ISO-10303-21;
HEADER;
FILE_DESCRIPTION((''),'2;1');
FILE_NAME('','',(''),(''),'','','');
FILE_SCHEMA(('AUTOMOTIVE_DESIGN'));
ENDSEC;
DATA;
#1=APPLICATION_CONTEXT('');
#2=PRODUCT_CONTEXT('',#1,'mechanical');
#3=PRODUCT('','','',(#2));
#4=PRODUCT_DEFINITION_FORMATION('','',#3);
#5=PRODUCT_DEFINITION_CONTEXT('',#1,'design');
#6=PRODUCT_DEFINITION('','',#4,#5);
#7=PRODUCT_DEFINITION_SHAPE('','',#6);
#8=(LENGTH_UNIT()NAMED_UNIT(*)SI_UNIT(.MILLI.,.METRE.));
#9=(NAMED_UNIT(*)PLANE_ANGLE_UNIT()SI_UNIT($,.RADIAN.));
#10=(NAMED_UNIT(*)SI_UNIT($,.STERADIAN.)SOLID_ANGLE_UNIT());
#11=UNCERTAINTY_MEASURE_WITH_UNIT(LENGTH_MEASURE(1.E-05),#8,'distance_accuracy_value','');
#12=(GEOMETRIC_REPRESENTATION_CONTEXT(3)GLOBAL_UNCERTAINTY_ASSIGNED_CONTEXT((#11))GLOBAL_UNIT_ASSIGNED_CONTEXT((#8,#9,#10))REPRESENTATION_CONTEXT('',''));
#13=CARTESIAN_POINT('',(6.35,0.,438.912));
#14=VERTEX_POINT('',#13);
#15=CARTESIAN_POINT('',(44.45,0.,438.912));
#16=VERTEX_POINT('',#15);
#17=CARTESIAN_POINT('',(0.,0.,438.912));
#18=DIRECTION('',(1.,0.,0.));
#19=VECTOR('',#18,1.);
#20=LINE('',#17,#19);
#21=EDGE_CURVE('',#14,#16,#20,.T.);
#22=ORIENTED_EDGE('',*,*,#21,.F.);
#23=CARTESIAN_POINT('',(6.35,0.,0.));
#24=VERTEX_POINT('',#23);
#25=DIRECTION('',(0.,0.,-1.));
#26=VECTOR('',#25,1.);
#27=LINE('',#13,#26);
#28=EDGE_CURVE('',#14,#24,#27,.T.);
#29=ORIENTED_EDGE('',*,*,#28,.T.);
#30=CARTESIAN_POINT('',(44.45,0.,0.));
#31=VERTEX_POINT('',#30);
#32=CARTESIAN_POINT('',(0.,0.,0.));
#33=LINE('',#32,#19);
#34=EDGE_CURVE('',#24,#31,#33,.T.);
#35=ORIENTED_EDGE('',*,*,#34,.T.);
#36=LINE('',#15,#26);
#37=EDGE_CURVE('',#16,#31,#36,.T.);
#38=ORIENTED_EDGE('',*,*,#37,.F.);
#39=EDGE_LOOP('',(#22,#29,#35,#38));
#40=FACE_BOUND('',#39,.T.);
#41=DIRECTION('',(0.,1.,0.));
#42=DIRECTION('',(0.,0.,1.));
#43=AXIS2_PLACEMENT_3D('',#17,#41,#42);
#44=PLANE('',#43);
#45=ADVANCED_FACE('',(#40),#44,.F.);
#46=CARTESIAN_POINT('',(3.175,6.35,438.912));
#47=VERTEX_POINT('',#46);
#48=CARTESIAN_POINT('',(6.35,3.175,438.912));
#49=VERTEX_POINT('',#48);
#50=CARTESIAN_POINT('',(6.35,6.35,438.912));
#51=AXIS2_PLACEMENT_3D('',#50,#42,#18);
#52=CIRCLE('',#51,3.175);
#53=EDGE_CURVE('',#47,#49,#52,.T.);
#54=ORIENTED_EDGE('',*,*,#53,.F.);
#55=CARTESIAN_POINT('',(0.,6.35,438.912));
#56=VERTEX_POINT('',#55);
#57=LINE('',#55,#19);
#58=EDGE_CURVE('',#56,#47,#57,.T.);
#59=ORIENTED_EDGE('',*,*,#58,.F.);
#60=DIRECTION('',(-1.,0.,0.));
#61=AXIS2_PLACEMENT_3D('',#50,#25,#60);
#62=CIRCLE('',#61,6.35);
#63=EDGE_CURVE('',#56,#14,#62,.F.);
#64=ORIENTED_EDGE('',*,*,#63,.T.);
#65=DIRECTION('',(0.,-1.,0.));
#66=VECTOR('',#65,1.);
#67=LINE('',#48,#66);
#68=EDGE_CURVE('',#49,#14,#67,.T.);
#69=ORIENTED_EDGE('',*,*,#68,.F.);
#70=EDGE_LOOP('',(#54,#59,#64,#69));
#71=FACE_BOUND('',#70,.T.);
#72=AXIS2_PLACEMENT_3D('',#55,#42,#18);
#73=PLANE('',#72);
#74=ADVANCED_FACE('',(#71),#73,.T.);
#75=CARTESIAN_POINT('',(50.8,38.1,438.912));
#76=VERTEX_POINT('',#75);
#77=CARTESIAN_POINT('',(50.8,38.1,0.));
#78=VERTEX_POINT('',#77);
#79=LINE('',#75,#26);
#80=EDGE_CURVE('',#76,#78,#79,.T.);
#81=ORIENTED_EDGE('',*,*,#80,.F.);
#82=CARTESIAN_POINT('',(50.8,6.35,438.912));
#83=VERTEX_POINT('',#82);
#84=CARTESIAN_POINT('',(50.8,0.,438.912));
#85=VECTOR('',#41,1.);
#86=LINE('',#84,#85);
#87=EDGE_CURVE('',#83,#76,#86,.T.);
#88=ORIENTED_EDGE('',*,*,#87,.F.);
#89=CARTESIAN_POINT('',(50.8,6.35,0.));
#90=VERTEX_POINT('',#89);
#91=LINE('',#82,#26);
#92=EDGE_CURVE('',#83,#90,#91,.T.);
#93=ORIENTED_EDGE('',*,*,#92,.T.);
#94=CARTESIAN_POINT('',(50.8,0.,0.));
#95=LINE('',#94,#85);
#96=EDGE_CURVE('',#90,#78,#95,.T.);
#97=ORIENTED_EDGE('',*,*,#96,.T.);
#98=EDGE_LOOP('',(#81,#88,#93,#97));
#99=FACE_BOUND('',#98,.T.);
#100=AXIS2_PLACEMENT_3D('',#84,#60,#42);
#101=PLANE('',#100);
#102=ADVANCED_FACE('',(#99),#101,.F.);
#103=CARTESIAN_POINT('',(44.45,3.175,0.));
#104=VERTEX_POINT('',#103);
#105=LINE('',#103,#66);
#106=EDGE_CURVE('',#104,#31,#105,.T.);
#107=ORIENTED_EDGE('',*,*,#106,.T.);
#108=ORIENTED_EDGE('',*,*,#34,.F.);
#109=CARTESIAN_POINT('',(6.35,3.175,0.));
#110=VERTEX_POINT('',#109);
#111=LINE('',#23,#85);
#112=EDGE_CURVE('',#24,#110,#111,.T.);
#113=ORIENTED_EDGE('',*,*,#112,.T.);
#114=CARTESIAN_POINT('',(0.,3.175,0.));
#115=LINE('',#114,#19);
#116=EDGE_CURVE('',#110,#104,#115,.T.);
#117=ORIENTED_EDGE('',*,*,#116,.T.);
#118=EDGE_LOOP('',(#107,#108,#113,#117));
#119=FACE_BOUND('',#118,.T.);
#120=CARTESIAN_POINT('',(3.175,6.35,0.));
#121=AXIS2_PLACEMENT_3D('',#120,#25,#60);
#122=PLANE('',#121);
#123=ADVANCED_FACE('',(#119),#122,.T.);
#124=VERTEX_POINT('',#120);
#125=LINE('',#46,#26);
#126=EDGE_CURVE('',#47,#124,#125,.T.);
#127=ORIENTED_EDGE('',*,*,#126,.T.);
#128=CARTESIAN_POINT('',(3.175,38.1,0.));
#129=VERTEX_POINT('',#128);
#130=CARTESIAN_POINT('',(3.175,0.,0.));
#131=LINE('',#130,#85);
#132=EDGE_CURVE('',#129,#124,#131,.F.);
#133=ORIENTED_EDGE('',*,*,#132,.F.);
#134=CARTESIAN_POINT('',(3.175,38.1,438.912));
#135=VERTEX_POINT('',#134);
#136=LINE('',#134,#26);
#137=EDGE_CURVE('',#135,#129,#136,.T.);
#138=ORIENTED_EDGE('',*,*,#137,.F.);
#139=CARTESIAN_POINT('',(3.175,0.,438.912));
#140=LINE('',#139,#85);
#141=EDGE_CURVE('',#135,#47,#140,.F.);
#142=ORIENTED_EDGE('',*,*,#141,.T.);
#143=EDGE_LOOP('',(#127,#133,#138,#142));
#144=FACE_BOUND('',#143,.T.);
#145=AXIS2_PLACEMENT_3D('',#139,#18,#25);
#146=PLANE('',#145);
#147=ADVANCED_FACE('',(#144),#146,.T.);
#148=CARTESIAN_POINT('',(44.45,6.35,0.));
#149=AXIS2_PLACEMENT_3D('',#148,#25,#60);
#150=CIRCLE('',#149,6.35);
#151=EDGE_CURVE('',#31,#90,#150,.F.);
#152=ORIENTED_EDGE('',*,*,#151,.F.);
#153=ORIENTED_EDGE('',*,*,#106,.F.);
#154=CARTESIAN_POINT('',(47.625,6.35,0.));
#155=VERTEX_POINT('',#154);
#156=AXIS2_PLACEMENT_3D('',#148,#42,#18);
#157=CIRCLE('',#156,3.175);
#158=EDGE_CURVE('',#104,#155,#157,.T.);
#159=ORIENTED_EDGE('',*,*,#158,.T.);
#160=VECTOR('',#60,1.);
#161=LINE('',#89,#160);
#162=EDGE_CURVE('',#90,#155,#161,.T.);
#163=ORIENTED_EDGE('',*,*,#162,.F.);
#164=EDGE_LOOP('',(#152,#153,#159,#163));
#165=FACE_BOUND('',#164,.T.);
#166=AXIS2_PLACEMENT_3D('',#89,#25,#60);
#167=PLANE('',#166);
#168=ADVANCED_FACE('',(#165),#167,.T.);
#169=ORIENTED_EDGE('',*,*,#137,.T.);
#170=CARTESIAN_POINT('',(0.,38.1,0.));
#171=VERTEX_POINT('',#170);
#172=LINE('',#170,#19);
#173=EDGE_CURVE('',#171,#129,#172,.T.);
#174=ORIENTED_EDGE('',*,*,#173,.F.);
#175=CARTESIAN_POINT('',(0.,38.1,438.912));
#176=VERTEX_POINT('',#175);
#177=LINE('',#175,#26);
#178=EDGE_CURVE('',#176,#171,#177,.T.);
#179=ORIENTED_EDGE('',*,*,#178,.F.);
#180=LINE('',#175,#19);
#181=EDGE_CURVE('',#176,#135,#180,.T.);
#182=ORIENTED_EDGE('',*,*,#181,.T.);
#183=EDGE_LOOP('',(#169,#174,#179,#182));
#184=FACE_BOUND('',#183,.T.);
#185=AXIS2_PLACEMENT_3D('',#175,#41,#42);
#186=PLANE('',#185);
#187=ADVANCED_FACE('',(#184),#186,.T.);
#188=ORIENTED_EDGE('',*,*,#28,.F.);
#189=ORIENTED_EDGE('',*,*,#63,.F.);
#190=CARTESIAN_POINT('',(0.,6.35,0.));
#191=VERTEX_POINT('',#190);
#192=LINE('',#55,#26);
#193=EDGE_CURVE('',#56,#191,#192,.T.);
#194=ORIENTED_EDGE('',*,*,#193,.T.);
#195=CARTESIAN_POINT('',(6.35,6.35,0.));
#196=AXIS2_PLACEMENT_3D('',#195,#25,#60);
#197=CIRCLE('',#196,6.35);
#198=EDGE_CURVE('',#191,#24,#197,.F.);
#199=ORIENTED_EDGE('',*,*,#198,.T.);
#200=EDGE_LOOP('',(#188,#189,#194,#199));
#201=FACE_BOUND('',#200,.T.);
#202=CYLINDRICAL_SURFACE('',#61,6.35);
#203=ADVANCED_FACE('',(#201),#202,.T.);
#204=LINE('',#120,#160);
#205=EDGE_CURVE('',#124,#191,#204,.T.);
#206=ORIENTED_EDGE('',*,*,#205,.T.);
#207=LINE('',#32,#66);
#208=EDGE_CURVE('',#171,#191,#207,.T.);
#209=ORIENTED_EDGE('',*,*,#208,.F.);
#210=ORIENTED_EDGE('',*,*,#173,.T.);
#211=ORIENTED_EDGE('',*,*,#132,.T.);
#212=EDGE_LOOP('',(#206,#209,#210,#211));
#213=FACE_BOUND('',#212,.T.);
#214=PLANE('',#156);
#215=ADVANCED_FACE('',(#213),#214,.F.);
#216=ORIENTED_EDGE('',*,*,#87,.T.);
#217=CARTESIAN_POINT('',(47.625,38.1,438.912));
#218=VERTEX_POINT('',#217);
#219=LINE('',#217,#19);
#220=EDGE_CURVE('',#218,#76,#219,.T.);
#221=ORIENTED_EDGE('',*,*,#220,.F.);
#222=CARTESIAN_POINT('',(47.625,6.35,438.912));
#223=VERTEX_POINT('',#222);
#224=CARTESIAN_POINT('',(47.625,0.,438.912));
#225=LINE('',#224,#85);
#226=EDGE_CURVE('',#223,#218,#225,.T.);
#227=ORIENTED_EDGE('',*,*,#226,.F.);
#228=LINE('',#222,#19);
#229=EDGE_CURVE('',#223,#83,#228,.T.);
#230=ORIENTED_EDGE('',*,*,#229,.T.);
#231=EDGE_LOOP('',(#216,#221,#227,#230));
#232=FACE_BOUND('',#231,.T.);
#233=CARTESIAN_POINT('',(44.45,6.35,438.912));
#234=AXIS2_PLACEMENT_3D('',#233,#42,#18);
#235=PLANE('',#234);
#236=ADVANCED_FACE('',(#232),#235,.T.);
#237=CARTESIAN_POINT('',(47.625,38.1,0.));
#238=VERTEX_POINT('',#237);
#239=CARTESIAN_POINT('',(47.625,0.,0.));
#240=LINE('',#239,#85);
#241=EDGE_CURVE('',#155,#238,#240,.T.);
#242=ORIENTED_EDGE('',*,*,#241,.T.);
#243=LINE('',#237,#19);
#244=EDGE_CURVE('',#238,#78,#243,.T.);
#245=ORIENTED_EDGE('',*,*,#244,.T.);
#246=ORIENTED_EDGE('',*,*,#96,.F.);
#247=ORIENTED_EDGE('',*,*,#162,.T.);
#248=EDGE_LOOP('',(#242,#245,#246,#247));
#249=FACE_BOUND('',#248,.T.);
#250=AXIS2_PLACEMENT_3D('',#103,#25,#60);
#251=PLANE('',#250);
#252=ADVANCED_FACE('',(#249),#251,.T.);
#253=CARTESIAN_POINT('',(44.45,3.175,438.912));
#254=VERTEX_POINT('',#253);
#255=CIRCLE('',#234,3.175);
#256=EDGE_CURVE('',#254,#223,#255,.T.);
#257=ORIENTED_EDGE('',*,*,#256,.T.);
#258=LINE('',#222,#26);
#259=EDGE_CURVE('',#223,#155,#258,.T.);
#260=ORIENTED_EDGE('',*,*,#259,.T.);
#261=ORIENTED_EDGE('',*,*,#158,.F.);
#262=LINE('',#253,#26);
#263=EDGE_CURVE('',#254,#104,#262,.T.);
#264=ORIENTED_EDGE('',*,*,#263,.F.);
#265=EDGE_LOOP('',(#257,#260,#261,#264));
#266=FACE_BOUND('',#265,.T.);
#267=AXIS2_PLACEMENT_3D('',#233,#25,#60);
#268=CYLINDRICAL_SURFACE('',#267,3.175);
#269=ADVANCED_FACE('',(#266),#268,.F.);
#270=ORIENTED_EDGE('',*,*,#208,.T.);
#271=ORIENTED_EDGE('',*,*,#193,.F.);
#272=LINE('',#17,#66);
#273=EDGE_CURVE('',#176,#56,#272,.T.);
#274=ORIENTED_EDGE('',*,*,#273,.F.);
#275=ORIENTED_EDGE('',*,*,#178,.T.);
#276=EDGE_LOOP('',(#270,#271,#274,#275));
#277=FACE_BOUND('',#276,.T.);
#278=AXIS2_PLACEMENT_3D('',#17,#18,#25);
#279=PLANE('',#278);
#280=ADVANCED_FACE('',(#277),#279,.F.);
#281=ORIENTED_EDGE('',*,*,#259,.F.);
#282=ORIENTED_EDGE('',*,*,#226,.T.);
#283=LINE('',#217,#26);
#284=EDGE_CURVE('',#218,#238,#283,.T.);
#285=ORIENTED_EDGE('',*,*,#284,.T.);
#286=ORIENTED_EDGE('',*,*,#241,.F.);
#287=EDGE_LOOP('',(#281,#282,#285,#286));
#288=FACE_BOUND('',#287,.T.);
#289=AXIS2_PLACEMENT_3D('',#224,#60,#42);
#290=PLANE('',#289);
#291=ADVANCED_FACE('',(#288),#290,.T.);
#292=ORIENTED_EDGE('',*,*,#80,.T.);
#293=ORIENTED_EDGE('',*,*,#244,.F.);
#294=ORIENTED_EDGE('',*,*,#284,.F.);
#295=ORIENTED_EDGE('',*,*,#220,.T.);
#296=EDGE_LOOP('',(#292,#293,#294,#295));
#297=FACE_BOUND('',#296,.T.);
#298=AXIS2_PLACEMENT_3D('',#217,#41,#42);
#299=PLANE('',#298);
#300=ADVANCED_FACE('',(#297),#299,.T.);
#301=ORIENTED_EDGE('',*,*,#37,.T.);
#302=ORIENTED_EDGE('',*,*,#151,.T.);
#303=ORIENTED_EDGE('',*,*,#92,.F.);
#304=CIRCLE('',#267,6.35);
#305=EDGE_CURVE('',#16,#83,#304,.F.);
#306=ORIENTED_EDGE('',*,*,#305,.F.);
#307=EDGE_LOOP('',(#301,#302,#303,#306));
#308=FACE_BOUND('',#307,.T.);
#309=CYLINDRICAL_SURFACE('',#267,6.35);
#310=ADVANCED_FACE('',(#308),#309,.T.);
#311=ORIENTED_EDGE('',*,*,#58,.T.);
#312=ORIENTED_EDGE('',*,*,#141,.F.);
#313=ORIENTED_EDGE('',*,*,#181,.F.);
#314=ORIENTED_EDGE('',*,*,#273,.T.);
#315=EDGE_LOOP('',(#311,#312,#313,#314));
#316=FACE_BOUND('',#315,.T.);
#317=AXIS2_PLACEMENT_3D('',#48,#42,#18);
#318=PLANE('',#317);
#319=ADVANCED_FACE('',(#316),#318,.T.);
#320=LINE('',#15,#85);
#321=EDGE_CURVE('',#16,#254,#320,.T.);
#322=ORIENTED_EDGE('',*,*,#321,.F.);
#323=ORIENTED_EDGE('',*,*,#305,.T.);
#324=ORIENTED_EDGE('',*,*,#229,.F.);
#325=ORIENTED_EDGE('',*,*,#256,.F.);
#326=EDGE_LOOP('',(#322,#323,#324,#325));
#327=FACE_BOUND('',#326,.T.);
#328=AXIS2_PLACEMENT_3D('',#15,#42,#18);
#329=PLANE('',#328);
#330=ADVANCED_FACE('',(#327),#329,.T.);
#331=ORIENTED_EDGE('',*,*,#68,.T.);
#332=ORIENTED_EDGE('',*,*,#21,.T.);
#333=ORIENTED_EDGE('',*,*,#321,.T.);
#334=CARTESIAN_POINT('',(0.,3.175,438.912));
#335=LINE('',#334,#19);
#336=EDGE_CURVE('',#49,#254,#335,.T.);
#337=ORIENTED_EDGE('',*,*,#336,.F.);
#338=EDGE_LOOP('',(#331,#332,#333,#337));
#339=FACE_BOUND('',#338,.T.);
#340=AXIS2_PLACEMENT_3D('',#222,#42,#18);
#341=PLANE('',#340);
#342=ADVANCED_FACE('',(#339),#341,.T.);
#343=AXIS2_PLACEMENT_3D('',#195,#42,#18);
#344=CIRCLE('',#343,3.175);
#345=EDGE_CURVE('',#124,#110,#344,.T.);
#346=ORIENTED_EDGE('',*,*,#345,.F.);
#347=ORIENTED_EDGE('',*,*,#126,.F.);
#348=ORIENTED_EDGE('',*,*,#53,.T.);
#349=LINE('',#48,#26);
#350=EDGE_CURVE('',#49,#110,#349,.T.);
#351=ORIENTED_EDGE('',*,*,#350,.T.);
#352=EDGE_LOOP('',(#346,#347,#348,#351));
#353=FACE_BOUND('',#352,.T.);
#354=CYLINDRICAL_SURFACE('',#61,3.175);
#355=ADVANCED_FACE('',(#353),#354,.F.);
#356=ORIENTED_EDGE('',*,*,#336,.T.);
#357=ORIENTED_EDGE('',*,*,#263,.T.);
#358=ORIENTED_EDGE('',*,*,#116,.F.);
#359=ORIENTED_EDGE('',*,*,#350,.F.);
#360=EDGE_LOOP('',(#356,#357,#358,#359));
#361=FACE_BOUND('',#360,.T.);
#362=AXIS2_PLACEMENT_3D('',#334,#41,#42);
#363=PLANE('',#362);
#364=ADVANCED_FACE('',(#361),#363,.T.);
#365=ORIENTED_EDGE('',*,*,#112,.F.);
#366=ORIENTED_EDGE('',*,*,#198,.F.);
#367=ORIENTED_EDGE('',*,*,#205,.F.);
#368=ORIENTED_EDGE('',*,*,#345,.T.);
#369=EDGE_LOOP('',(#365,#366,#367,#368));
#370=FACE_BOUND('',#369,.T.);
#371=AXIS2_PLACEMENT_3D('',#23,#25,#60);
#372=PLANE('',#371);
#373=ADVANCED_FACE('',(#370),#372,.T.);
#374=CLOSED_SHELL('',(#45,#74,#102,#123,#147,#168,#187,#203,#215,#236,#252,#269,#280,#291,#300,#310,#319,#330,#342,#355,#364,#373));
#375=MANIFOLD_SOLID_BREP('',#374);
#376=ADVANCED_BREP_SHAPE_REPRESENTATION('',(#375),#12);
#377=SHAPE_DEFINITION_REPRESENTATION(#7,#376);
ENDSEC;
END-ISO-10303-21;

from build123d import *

# Parameters (mm, degrees)
BASE_FLANGE1_DEPTH = 438.912


# Sheet-metal steps are written as plain solids
with BuildPart() as part:
    # Sketch1 → Base-Flange1 (new body)
    with BuildSketch(Plane.XY):
        with BuildLine():
            Line((50.8, 38.1), (50.8, 6.35))
            ThreePointArc((50.8, 6.35), (48.940128061, 1.859871939), (44.45, 0))
            Line((44.45, 0), (6.35, 0))
            ThreePointArc((6.35, 0), (1.859871939, 1.859871939), (0, 6.35))
            Line((0, 6.35), (0, 38.1))
            Line((0, 38.1), (3.175, 38.1))
            Line((3.175, 38.1), (3.175, 6.35))
            ThreePointArc((3.175, 6.35), (4.10493597, 4.10493597), (6.35, 3.175))
            Line((6.35, 3.175), (44.45, 3.175))
            ThreePointArc((44.45, 3.175), (46.69506403, 4.10493597), (47.625, 6.35))
            Line((47.625, 6.35), (47.625, 38.1))
            Line((47.625, 38.1), (50.8, 38.1))
        make_face()
    extrude(amount=BASE_FLANGE1_DEPTH)


solid = part.part
